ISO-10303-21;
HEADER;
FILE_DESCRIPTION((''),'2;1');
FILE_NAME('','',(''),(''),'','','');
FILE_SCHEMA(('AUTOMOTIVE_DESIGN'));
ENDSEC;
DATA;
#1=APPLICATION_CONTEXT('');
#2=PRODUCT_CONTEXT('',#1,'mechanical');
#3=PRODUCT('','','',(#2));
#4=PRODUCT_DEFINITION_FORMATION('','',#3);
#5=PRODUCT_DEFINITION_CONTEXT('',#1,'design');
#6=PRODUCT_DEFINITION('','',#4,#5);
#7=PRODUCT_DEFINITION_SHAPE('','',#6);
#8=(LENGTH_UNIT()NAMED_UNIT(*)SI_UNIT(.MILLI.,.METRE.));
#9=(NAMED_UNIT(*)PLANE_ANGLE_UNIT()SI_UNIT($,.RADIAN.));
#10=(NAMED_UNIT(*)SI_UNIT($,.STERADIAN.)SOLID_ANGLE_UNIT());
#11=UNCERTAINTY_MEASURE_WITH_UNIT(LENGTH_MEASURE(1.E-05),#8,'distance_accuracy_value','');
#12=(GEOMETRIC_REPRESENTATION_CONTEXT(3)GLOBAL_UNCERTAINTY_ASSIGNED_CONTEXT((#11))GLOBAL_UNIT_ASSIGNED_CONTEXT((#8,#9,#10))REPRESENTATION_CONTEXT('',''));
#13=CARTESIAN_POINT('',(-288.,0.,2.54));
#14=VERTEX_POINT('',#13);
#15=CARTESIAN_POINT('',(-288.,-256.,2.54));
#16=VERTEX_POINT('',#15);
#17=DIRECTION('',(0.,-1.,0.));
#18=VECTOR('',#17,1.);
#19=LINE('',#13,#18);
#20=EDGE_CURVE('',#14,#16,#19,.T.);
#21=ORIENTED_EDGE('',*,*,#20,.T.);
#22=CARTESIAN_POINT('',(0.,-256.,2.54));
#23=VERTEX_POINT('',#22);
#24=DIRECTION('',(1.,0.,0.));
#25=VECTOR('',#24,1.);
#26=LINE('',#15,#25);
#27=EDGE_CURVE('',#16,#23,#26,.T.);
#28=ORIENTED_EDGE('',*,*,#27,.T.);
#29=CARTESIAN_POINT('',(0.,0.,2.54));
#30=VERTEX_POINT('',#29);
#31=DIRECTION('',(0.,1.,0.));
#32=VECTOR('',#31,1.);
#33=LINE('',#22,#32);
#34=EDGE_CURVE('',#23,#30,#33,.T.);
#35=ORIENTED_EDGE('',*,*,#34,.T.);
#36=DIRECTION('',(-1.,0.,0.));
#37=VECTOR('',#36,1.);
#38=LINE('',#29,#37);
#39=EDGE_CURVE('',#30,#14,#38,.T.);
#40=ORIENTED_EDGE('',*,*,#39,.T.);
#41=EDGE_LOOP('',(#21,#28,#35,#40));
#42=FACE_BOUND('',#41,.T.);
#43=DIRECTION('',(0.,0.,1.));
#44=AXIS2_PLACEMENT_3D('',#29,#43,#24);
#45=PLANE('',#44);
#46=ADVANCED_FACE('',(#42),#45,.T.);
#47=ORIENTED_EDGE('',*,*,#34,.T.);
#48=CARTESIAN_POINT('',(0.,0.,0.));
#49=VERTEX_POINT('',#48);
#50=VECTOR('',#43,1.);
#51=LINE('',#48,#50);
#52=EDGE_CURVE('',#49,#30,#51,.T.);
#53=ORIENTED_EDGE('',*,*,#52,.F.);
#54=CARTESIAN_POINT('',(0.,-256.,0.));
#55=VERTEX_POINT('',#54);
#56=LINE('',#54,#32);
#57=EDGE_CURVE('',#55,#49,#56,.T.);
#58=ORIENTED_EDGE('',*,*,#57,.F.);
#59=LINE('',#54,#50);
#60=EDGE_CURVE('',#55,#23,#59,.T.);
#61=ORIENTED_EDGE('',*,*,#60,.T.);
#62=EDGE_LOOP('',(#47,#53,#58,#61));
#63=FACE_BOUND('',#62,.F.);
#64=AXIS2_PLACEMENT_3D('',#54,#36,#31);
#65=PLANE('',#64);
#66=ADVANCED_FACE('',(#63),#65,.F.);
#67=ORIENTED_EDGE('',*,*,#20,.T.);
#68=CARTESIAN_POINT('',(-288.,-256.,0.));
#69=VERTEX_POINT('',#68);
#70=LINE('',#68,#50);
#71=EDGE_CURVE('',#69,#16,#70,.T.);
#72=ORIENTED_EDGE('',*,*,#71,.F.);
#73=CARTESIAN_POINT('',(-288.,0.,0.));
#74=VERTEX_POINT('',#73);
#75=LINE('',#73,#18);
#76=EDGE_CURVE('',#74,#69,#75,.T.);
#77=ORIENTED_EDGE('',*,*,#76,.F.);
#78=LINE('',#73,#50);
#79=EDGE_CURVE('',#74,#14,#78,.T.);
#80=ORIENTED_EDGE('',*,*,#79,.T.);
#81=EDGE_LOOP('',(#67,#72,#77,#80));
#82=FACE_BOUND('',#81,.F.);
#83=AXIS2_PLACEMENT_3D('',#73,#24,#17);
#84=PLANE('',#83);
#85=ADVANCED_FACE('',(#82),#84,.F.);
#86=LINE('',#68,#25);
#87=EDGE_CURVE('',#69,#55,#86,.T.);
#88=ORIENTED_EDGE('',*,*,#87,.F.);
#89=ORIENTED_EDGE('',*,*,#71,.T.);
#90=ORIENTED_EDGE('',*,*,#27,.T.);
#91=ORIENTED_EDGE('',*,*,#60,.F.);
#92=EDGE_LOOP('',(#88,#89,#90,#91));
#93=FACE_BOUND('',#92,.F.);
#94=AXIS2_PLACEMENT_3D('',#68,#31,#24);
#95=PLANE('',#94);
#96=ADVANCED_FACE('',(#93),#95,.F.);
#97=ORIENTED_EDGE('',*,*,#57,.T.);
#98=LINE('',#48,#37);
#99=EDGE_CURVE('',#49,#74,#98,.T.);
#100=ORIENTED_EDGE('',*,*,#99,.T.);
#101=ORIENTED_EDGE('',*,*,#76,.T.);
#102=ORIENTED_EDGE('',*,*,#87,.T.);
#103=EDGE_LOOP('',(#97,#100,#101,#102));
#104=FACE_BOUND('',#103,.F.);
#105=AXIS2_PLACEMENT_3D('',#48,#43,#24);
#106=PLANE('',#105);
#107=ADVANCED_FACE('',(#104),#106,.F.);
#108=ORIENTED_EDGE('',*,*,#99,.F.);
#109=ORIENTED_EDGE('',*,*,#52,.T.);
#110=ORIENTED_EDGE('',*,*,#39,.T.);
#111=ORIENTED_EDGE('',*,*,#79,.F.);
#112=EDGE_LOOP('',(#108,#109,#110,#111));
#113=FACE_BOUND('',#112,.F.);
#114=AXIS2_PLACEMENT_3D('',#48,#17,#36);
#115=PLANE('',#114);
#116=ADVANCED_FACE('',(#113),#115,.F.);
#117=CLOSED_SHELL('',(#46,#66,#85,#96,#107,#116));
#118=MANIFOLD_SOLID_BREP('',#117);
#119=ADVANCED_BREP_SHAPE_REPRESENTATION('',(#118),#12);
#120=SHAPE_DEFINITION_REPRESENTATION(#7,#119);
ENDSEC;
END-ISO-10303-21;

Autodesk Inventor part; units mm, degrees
ref_plane "YZ Plane" through (0, 0, 0) normal (1, 0, 0) x (0, 1, 0)
ref_plane "XZ Plane" through (0, 0, 0) normal (0, 1, 0) x (-1, 0, 0)
ref_plane "XY Plane" through (0, 0, 0) normal (0, 0, 1) x (1, 0, 0)
sketch "Sketch1" plane through (0, 0, 0) normal (0, 0, 1) x (1, 0, 0)
  line L0 (0, 0) -> (-288, 0)
  line L1 (-288, 0) -> (-288, -256)
  line L2 (-288, -256) -> (0, -256)
  line L3 (0, -256) -> (0, 0)
  dimension "d0" = 288
  dimension "d1" = 256
extrude "Extrusion1" add sketch "Sketch1" along normal blind 2.54
sketch "Sketch2" plane through (0, 0, 2.54) normal (0, 0, 1) x (1, 0, 0)
  line L0 (-288, 0) -> (-256, 0)
  line L1 (-256, 0) -> (-256, -32)
  line L2 (-256, -32) -> (-288, -32)
  line L3 (-288, -32) -> (-288, 0)
  line L4 (-224, 0) -> (-192, 0)
  line L5 (-192, 0) -> (-192, -32)
  line L6 (-192, -32) -> (-224, -32)
  line L7 (-224, -32) -> (-224, 0)
  line L8 (-160, 0) -> (-128, 0)
  line L9 (-128, 0) -> (-128, -32)
  line L10 (-128, -32) -> (-160, -32)
  line L11 (-160, -32) -> (-160, 0)
  line L12 (-96, 0) -> (-64, 0)
  line L13 (-64, 0) -> (-64, -32)
  line L14 (-64, -32) -> (-96, -32)
  line L15 (-96, -32) -> (-96, 0)
  line L16 (-288, -64) -> (-256, -64)
  line L17 (-256, -64) -> (-256, -96)
  line L18 (-256, -96) -> (-288, -96)
  line L19 (-288, -96) -> (-288, -64)
  line L20 (-224, -64) -> (-192, -64)
  line L21 (-192, -64) -> (-192, -96)
  line L22 (-192, -96) -> (-224, -96)
  line L23 (-224, -96) -> (-224, -64)
  line L24 (-160, -64) -> (-128, -64)
  line L25 (-128, -64) -> (-128, -96)
  line L26 (-128, -96) -> (-160, -96)
  line L27 (-160, -96) -> (-160, -64)
  line L28 (-96, -64) -> (-64, -64)
  line L29 (-64, -64) -> (-64, -96)
  line L30 (-64, -96) -> (-96, -96)
  line L31 (-96, -96) -> (-96, -64)
  line L32 (-288, -128) -> (-256, -128)
  line L33 (-256, -128) -> (-256, -160)
  line L34 (-256, -160) -> (-288, -160)
  line L35 (-288, -160) -> (-288, -128)
  line L36 (-224, -128) -> (-192, -128)
  line L37 (-192, -128) -> (-192, -160)
  line L38 (-192, -160) -> (-224, -160)
  line L39 (-224, -160) -> (-224, -128)
  line L40 (-160, -128) -> (-128, -128)
  line L41 (-128, -128) -> (-128, -160)
  line L42 (-128, -160) -> (-160, -160)
  line L43 (-160, -160) -> (-160, -128)
  line L44 (-96, -128) -> (-64, -128)
  line L45 (-64, -128) -> (-64, -160)
  line L46 (-64, -160) -> (-96, -160)
  line L47 (-96, -160) -> (-96, -128)
  line L48 (-288, -192) -> (-256, -192)
  line L49 (-256, -192) -> (-256, -224)
  line L50 (-256, -224) -> (-288, -224)
  line L51 (-288, -224) -> (-288, -192)
  line L52 (-224, -192) -> (-192, -192)
  line L53 (-192, -192) -> (-192, -224)
  line L54 (-192, -224) -> (-224, -224)
  line L55 (-224, -224) -> (-224, -192)
  line L56 (-160, -192) -> (-128, -192)
  line L57 (-128, -192) -> (-128, -224)
  line L58 (-128, -224) -> (-160, -224)
  line L59 (-160, -224) -> (-160, -192)
  line L60 (-96, -192) -> (-64, -192)
  line L61 (-64, -192) -> (-64, -224)
  line L62 (-64, -224) -> (-96, -224)
  line L63 (-96, -224) -> (-96, -192)
  line L64 (-256, -64) -> (-224, -64)
  line L65 (-224, -64) -> (-224, -32)
  line L66 (-224, -32) -> (-256, -32)
  line L67 (-256, -32) -> (-256, -64)
  line L68 (-192, -64) -> (-160, -64)
  line L69 (-160, -64) -> (-160, -32)
  line L70 (-160, -32) -> (-192, -32)
  line L71 (-192, -32) -> (-192, -64)
  line L72 (-128, -64) -> (-96, -64)
  line L73 (-96, -64) -> (-96, -32)
  line L74 (-96, -32) -> (-128, -32)
  line L75 (-128, -32) -> (-128, -64)
  line L76 (-64, -64) -> (-32, -64)
  line L77 (-32, -32) -> (-64, -32)
  line L78 (-64, -32) -> (-64, -64)
  line L79 (-64, -96) -> (-32, -96)
  line L80 (-32, -96) -> (-32, -128)
  line L81 (-32, -128) -> (-64, -128)
  line L82 (-64, -128) -> (-64, -96)
  line L83 (-64, -160) -> (-32, -160)
  line L84 (-32, -160) -> (-32, -192)
  line L85 (-32, -192) -> (-64, -192)
  line L86 (-64, -192) -> (-64, -160)
  line L87 (-96, -192) -> (-128, -192)
  line L88 (-128, -192) -> (-128, -160)
  line L89 (-128, -160) -> (-96, -160)
  line L90 (-96, -160) -> (-96, -192)
  line L91 (-96, -128) -> (-128, -128)
  line L92 (-128, -128) -> (-128, -96)
  line L93 (-128, -96) -> (-96, -96)
  line L94 (-96, -96) -> (-96, -128)
  line L95 (-160, -128) -> (-192, -128)
  line L96 (-192, -128) -> (-192, -96)
  line L97 (-192, -96) -> (-160, -96)
  line L98 (-160, -96) -> (-160, -128)
  line L99 (-224, -128) -> (-256, -128)
  line L100 (-256, -128) -> (-256, -96)
  line L101 (-256, -96) -> (-224, -96)
  line L102 (-224, -96) -> (-224, -128)
  line L103 (-256, -160) -> (-224, -160)
  line L104 (-224, -160) -> (-224, -192)
  line L105 (-224, -192) -> (-256, -192)
  line L106 (-256, -192) -> (-256, -160)
  line L107 (-192, -160) -> (-160, -160)
  line L108 (-160, -160) -> (-160, -192)
  line L109 (-160, -192) -> (-192, -192)
  line L110 (-192, -192) -> (-192, -160)
  line L111 (-256, -224) -> (-224, -224)
  line L112 (-224, -224) -> (-224, -256)
  line L113 (-224, -256) -> (-256, -256)
  line L114 (-256, -256) -> (-256, -224)
  line L115 (-192, -224) -> (-160, -224)
  line L116 (-160, -224) -> (-160, -256)
  line L117 (-160, -256) -> (-192, -256)
  line L118 (-192, -256) -> (-192, -224)
  line L119 (-128, -224) -> (-96, -224)
  line L120 (-96, -224) -> (-96, -256)
  line L121 (-96, -256) -> (-128, -256)
  line L122 (-128, -256) -> (-128, -224)
  line L123 (-64, -224) -> (-32, -224)
  line L124 (-32, -224) -> (-32, -256)
  line L125 (-32, -256) -> (-64, -256)
  line L126 (-64, -256) -> (-64, -224)
  line L127 (-32, 0) -> (-32, -256)
  line L128 (0, 0) -> (-288, 0) projected
  line L129 (0, 0) -> (-32, 0)
  line L130 (-32, 0) -> (-32, -256)
  line L131 (-32, -256) -> (0, -256)
  line L132 (0, -256) -> (0, 0)
  dimension "d4" = 32
  dimension "d5" = 32
  dimension "d8" = 64
  dimension "d11" = 64
  dimension "d14" = 32
mark "Mark1"
properties part number "Floor"
